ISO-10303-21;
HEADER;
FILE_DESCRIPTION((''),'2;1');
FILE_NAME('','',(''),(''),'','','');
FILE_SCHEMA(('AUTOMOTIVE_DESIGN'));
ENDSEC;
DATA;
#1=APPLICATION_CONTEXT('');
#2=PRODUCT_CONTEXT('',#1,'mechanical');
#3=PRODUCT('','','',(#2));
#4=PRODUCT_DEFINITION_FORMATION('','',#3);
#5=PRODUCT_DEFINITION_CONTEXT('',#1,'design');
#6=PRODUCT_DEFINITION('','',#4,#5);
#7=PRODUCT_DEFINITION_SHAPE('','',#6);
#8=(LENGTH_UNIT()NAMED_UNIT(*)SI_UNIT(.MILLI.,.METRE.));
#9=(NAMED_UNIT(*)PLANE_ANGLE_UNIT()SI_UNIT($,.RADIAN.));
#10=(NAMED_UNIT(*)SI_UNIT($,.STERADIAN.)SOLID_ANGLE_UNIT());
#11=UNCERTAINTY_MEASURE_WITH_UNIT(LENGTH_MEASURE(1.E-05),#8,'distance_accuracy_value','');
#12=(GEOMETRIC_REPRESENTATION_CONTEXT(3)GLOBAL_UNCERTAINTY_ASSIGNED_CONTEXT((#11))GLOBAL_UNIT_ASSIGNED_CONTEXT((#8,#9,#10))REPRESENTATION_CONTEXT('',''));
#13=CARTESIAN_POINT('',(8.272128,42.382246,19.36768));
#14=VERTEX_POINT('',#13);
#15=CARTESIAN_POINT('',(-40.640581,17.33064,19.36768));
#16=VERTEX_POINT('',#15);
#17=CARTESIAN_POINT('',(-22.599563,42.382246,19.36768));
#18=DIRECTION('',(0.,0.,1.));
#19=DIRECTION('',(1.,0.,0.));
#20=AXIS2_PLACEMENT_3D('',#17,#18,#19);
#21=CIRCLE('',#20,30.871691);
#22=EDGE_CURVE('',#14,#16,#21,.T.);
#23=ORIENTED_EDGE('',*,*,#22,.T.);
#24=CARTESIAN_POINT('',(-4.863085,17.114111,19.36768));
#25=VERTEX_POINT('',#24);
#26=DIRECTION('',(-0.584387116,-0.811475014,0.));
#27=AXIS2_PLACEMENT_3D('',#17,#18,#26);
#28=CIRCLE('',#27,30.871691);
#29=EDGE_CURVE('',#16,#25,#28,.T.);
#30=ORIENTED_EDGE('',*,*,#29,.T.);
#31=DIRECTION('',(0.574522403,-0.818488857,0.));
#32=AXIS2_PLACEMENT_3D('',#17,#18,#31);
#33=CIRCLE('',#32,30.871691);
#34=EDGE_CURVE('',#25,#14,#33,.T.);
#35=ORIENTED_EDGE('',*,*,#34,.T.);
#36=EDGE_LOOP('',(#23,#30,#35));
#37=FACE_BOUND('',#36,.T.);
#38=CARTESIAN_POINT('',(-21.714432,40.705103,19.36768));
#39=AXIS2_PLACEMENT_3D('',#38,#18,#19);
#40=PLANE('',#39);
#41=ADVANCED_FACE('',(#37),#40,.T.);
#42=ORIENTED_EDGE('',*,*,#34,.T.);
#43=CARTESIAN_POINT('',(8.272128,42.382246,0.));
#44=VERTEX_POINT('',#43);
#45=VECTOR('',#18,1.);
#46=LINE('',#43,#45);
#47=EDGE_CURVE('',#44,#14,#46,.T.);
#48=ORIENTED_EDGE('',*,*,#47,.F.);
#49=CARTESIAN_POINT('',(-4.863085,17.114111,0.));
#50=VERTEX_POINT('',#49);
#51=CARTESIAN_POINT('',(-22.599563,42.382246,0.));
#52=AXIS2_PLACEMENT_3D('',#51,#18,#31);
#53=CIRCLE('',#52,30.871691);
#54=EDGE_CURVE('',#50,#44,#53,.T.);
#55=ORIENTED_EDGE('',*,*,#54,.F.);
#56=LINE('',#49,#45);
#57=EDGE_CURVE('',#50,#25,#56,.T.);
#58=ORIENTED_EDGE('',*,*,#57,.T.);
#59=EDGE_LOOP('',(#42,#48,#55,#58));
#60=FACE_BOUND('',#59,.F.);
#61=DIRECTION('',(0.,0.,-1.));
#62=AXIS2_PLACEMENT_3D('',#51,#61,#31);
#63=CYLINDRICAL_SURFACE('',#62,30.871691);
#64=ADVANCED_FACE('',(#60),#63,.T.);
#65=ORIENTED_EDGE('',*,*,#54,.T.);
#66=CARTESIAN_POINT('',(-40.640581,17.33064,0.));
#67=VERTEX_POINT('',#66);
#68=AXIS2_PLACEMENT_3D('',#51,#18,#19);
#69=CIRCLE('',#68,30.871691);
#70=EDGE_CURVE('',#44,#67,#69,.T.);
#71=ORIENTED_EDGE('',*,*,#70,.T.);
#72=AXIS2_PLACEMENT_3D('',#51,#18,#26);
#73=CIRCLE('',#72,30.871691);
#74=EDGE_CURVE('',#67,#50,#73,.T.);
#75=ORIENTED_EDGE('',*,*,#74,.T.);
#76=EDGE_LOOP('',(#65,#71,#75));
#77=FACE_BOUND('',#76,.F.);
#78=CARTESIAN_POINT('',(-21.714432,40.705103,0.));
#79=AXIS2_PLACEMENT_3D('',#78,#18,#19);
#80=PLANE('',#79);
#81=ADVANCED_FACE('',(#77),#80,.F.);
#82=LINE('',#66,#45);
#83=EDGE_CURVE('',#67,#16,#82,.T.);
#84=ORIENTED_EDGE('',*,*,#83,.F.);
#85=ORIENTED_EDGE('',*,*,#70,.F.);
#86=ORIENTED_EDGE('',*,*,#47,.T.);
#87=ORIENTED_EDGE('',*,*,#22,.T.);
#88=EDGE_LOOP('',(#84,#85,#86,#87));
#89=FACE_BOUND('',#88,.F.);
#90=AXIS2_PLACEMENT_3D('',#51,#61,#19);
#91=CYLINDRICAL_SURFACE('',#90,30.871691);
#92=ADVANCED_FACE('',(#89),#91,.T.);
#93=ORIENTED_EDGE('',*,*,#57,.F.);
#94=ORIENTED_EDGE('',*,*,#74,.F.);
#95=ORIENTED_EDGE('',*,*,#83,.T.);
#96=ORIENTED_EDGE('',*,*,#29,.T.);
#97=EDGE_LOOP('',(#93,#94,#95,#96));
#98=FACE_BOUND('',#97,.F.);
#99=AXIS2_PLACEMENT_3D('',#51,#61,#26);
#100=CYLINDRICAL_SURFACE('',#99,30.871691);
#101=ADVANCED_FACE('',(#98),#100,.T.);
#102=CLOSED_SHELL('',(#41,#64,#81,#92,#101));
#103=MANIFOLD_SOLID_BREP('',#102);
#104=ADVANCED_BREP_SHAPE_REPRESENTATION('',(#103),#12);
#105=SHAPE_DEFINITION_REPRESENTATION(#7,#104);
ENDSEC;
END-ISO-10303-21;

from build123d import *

# Parameters (mm, degrees)
F2_DEPTH = 19.36768


# Not quite as in the source:
# - a feature of the source that left no trace in its solid (it failed there, or was rolled back) is left out
# - the program builds the solid bodies; features that only make, move or delete a surface that nothing else refers to are left out


with BuildPart() as f2:
    # F0 (on Top) → F2 (new body)
    with BuildSketch(Plane.XY):
        with BuildLine():
            ThreePointArc((-4.863084816, 17.1141110558), (4.7921910677, 28.1431057658), (8.2721280354, 42.382246028))
            ThreePointArc((8.2721280354, 42.382246028), (-36.6726675985, 69.8596735008), (-40.6405812437, 17.3306402297))
            ThreePointArc((-40.6405812437, 17.3306402297), (-22.786398147, 11.5111205147), (-4.863084816, 17.1141110558))
        make_face()
    extrude(amount=F2_DEPTH)


solid = f2.part
